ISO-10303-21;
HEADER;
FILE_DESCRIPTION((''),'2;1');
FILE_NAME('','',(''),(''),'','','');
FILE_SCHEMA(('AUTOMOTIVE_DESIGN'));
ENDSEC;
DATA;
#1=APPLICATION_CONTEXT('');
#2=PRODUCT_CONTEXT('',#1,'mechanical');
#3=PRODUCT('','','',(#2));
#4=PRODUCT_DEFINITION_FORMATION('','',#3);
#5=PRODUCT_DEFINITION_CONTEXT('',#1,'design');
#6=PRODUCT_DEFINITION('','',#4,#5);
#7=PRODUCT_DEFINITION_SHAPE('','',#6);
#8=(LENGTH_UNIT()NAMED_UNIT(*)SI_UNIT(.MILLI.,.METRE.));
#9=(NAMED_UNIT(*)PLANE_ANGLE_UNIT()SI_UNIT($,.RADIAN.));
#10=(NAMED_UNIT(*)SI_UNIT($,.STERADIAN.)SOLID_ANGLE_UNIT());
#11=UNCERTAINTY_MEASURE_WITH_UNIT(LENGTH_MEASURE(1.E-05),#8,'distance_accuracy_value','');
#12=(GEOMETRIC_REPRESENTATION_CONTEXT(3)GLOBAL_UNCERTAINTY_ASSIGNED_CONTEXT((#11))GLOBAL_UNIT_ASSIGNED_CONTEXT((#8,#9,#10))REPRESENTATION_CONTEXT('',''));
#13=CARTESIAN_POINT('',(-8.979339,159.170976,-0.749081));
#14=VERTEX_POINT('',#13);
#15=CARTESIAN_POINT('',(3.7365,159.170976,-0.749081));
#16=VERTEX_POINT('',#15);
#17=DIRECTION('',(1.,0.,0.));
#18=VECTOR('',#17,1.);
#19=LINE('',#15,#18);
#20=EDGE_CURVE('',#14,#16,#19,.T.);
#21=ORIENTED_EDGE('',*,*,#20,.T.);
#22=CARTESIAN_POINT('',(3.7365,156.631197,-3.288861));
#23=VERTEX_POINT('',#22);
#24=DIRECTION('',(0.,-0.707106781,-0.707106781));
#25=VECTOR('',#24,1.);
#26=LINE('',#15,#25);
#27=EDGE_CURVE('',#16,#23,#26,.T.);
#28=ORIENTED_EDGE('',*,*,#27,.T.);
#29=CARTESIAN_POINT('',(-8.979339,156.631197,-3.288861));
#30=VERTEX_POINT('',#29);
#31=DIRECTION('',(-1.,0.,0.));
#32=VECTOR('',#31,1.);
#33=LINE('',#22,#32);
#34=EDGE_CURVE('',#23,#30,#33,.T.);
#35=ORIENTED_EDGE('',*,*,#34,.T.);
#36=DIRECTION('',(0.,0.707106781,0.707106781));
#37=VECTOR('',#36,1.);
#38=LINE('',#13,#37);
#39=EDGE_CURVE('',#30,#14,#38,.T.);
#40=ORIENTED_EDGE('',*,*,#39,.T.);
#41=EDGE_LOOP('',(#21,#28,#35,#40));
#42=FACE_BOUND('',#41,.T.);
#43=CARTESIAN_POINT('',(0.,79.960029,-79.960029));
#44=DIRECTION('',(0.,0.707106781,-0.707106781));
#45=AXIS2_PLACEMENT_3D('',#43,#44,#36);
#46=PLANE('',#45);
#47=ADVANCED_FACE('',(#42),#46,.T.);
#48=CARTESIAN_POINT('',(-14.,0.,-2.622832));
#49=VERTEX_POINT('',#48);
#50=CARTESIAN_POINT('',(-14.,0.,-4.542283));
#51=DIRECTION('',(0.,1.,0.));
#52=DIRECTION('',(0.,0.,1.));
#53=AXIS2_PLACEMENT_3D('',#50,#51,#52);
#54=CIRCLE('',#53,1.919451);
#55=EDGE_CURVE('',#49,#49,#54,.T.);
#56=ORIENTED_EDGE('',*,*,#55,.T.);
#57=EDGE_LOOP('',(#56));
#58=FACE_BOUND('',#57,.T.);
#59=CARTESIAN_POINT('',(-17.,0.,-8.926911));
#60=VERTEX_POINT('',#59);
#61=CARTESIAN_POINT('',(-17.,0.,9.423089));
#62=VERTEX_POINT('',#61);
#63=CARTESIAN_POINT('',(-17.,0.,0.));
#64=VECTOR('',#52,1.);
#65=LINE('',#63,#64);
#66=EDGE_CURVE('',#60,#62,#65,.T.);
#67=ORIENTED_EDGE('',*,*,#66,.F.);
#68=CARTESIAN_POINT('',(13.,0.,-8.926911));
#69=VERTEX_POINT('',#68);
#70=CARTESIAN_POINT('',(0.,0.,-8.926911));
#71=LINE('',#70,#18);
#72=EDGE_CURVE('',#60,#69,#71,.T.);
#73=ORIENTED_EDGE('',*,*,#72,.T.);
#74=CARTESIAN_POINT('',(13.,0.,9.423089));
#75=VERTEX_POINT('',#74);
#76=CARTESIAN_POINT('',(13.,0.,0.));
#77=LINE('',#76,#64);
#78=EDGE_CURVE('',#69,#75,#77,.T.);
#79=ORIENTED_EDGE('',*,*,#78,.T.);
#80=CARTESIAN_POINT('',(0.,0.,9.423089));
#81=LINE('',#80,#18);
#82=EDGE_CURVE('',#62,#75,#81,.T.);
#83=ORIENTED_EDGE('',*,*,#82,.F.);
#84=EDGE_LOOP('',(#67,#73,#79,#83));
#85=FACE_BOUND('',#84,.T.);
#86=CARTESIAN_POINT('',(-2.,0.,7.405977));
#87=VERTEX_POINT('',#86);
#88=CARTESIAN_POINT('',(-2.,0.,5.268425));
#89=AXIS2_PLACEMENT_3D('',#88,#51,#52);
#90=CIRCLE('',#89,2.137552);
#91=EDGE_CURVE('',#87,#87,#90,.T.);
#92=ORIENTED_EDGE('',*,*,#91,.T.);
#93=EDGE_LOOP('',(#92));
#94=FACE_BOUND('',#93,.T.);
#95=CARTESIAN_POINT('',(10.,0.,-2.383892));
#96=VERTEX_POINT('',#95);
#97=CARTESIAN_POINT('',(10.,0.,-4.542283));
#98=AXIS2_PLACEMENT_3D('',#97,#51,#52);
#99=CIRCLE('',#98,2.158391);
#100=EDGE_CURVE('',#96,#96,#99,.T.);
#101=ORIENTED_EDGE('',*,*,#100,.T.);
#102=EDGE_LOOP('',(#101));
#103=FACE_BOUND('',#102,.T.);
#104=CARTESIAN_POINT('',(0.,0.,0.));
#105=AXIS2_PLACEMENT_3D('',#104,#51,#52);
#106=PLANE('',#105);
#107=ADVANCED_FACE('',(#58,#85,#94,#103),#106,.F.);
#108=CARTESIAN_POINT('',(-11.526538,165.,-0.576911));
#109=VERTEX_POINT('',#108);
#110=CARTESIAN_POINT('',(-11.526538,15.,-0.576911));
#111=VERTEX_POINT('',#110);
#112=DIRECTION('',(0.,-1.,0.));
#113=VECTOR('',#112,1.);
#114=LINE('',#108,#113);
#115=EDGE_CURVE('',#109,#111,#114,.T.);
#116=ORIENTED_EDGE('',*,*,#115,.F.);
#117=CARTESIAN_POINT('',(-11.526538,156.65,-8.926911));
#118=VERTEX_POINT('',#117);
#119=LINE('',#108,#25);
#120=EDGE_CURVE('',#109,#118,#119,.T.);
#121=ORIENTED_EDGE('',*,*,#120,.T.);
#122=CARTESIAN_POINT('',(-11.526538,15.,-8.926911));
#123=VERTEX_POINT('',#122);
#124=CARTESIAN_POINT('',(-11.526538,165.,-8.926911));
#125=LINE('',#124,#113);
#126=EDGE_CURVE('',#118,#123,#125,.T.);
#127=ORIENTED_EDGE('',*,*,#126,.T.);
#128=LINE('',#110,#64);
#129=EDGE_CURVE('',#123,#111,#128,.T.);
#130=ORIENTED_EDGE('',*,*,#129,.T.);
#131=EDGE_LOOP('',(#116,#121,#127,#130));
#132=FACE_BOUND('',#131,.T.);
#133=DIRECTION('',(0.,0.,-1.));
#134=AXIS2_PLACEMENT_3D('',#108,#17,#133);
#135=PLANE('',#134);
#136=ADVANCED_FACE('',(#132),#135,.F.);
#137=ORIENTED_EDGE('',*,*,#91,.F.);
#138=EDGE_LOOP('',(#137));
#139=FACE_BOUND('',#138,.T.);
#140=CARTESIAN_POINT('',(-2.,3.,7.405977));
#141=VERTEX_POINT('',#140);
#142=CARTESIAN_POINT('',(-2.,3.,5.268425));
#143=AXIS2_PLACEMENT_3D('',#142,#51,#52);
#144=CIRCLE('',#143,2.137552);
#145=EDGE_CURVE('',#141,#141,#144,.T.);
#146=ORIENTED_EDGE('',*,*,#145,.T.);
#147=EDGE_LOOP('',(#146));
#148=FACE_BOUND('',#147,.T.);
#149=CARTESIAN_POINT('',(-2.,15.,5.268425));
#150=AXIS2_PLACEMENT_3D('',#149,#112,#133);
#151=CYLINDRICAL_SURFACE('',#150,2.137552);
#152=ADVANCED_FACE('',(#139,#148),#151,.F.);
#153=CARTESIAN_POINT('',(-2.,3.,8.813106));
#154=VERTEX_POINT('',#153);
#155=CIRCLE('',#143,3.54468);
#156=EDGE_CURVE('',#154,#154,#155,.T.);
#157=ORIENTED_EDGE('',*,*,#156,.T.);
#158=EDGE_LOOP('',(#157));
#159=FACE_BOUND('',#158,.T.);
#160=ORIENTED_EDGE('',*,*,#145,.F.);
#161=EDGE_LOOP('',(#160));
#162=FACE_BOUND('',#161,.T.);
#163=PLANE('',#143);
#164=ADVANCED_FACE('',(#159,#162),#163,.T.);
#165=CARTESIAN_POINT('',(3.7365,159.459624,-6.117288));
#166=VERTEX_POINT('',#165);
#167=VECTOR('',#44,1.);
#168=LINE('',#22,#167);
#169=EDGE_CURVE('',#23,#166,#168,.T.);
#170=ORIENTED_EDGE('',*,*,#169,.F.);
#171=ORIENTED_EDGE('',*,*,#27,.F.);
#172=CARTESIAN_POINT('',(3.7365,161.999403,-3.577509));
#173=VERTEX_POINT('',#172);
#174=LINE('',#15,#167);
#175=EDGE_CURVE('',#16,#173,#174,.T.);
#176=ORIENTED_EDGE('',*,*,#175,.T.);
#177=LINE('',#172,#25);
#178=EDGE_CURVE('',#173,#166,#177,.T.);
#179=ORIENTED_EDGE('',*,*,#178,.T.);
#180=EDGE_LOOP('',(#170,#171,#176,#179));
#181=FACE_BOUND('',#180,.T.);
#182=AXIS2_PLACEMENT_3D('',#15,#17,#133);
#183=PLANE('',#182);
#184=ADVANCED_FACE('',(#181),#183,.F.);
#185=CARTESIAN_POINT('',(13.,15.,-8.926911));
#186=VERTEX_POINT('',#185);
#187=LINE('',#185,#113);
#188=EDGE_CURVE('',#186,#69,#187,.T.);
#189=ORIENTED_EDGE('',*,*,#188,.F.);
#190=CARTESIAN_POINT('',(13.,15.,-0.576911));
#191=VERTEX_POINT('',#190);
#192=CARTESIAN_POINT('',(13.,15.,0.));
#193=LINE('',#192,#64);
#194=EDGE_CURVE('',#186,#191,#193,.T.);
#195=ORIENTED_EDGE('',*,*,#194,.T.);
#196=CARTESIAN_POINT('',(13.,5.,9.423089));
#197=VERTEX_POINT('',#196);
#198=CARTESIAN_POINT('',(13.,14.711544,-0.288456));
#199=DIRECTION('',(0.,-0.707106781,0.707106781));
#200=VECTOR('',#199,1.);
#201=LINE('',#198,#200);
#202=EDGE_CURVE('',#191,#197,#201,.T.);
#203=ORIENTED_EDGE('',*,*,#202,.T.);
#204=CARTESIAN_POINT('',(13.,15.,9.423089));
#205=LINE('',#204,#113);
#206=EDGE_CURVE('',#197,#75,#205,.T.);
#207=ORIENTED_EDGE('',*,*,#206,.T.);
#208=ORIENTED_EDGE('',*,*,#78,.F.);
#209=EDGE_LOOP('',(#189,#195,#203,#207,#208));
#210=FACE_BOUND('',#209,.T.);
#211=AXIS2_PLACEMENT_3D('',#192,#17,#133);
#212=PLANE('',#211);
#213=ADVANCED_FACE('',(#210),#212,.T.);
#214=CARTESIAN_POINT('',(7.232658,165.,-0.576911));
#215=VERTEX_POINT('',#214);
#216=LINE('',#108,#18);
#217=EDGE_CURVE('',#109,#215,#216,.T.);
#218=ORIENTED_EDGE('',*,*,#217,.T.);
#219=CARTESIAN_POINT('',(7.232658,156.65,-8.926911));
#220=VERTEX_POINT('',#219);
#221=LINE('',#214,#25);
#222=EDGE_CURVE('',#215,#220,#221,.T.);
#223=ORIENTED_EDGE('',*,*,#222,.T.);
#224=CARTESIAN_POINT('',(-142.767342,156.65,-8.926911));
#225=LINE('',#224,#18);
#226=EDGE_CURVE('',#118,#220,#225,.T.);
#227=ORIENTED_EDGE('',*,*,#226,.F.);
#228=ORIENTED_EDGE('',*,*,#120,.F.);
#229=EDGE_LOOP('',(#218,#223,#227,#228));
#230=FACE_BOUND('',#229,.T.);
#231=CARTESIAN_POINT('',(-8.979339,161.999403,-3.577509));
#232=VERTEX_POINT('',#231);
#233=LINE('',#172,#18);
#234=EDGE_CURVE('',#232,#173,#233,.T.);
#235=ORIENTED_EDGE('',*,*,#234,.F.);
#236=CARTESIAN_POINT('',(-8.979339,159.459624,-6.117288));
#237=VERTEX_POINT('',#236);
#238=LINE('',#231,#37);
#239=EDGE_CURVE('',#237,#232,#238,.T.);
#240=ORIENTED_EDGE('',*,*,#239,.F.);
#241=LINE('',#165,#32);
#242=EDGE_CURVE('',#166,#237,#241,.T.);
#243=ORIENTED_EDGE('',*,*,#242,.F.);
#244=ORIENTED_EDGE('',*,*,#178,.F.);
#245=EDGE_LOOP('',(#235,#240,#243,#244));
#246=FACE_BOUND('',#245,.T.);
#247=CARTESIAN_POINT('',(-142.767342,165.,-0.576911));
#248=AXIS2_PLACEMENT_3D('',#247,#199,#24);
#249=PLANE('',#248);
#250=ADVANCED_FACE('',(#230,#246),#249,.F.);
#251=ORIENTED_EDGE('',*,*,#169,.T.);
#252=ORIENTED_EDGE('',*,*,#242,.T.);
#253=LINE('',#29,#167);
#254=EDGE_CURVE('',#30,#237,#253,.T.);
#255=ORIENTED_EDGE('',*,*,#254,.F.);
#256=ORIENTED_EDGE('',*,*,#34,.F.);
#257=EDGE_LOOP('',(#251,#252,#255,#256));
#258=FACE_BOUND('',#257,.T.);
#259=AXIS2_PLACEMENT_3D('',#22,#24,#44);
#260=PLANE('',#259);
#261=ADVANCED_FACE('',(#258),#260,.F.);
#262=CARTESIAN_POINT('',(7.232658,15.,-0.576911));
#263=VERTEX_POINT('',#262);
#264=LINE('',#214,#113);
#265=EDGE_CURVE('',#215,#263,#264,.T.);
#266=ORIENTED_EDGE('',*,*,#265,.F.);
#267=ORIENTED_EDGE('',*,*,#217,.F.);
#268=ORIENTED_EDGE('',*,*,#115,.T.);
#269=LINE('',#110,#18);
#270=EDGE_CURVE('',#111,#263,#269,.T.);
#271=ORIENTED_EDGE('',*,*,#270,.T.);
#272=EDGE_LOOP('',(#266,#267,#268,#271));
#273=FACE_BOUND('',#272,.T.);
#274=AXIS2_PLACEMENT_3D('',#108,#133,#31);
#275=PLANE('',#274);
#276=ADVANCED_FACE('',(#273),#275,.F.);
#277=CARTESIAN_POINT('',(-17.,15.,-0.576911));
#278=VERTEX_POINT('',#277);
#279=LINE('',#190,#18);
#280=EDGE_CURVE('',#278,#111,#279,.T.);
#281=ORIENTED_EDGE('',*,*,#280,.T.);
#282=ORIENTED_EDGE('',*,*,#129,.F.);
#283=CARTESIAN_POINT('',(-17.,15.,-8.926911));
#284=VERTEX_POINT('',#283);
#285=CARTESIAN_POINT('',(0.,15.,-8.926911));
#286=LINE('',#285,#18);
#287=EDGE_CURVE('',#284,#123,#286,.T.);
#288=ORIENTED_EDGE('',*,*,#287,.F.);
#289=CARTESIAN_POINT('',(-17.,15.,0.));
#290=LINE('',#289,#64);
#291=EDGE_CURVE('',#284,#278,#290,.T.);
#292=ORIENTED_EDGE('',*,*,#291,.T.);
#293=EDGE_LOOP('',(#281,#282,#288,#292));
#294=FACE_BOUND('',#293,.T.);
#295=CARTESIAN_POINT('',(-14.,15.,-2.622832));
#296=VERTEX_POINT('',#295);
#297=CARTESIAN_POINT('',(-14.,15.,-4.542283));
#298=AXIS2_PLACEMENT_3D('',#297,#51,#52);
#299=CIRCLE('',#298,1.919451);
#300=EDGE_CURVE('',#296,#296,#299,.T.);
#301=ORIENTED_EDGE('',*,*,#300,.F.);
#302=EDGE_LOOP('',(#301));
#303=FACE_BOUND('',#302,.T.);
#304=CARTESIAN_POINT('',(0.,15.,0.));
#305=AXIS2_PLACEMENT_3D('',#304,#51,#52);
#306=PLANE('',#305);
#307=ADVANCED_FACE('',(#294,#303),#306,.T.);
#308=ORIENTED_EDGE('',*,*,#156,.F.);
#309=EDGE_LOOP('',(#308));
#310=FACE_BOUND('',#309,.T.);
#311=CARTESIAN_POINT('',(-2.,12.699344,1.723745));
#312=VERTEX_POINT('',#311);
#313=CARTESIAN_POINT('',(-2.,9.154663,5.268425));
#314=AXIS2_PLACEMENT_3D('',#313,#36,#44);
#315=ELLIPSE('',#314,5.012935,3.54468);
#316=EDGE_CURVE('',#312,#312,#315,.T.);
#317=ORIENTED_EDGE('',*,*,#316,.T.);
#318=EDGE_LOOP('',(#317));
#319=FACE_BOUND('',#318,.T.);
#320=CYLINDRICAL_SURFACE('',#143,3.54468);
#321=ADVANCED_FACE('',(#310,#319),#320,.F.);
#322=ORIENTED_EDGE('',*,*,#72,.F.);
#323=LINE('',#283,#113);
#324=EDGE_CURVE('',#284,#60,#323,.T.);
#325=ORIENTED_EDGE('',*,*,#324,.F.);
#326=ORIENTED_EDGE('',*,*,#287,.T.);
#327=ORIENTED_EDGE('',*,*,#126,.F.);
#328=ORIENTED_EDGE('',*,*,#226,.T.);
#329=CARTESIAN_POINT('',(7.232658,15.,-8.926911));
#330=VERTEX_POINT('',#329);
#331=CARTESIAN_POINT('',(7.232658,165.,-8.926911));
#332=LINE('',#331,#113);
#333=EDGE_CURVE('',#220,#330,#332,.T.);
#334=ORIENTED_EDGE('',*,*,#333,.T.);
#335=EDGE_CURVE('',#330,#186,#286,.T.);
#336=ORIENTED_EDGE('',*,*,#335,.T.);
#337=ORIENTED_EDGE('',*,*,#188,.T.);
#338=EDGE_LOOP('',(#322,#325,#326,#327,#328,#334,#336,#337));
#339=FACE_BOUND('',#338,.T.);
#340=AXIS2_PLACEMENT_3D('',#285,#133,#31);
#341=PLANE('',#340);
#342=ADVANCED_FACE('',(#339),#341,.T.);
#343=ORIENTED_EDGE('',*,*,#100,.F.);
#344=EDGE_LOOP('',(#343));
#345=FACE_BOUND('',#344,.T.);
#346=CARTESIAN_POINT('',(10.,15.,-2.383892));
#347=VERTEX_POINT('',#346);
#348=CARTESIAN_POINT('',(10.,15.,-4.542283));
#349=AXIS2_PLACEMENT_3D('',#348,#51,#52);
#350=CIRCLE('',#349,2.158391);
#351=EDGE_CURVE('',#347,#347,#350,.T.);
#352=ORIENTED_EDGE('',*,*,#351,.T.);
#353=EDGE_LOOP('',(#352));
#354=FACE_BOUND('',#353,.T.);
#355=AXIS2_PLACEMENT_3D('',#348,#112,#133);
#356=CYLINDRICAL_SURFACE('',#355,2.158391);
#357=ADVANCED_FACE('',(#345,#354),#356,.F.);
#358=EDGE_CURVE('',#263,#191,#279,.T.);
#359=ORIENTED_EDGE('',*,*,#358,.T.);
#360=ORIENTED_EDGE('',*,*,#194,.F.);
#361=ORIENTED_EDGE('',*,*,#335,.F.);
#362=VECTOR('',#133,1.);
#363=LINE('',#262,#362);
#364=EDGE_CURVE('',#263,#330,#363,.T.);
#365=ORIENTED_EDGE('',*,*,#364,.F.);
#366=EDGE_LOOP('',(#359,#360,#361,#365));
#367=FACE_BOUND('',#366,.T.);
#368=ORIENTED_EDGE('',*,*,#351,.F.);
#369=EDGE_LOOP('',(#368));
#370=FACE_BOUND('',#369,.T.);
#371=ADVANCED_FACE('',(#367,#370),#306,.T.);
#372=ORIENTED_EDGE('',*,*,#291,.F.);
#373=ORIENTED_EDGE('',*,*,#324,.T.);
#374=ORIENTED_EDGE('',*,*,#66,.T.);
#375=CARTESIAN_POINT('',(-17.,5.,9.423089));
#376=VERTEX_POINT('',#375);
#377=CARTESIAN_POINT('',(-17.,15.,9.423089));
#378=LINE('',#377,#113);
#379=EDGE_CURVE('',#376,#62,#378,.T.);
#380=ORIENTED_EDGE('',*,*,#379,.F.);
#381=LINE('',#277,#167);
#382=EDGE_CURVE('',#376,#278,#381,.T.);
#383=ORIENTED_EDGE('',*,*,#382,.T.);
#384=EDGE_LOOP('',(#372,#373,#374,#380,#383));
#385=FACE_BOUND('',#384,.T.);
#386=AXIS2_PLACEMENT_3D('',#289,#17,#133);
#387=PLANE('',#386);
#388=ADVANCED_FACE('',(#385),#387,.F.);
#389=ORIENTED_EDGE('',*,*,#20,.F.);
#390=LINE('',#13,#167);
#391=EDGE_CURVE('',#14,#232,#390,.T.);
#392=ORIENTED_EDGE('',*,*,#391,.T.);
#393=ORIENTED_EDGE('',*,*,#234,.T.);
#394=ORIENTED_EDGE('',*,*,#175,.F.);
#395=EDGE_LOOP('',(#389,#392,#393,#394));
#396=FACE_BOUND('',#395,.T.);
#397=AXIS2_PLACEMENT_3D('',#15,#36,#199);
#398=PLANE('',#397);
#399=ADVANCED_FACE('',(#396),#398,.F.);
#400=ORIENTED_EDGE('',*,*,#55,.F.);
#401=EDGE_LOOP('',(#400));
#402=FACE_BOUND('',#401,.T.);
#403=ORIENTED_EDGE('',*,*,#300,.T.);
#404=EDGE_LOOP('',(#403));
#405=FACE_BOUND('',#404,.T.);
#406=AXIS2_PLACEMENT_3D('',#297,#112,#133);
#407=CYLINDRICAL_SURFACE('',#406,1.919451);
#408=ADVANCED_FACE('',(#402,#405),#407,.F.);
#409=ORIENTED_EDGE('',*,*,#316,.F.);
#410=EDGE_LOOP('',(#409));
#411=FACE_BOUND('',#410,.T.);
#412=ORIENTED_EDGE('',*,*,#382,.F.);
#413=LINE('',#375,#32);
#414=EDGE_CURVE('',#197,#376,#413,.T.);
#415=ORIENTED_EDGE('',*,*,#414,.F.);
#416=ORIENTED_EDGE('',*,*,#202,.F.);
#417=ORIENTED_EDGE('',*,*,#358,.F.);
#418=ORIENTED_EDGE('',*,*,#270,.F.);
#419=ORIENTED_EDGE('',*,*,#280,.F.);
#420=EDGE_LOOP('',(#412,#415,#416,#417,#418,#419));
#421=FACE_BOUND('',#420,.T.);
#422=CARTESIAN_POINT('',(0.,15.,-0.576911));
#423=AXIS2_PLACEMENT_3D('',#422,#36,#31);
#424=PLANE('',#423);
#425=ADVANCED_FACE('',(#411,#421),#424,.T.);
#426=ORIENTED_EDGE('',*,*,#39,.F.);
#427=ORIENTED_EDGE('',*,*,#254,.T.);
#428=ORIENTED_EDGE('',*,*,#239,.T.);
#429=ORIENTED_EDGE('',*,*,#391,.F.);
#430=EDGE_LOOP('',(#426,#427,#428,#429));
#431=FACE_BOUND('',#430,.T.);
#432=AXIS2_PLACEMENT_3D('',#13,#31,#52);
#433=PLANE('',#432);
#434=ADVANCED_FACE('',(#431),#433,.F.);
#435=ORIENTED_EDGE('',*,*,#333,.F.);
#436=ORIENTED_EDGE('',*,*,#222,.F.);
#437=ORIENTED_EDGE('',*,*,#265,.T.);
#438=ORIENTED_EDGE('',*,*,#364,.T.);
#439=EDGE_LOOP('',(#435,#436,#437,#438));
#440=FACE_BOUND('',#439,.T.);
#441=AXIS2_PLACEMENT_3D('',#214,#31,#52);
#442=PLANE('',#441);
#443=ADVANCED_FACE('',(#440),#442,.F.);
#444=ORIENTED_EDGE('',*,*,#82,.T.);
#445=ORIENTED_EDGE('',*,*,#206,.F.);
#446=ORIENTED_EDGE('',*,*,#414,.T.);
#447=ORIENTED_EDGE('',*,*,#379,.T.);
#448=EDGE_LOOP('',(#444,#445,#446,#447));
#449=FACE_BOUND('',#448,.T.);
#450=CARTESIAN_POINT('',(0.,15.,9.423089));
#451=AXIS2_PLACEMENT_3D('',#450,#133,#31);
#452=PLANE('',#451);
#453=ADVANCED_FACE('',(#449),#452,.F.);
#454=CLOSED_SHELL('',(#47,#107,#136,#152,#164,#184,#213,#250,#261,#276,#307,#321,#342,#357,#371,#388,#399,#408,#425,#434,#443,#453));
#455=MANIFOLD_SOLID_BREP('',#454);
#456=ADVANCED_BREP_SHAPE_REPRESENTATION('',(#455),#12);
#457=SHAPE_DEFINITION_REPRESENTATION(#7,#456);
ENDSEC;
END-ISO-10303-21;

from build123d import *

# Parameters (mm, degrees)
BOSS_EXTRUDE1_DEPTH = 15
CHAMFER1_SIZE       = 10
SKETCH2_R           = 3.544680495
CUT_EXTRUDE1_DEPTH  = 12
SKETCH3_W           = 18.759195859
SKETCH3_H           = 8.35
BOSS_EXTRUDE2_DEPTH = 150
CUT_EXTRUDE2_DEPTH  = 150
SKETCH5_W           = 12.715839202
SKETCH5_H           = 3.591790086
CUT_EXTRUDE3_DEPTH  = 4


with BuildPart() as part:
    # Sketch1 → Boss-Extrude1 (new body)
    with BuildSketch(Plane(origin=(0, 0, 0), x_dir=(1, 0, 0), z_dir=(0, 1, 0))):
        with BuildLine():
            Line((13, 8.926911476), (-2, 8.926911476))
            Line((-2, 8.926911476), (-2, 4.542283032))
            Line((-2, 4.542283032), (7.841609066, 4.542283032))
            ThreePointArc((7.841609066, 4.542283032), (10, 6.700673966), (12.158390934, 4.542283032))
            Line((12.158390934, 4.542283032), (13, 4.542283032))
            Line((13, 4.542283032), (13, 8.926911476))
        make_face()
        with BuildLine():
            Line((-2, 4.542283032), (-2, 8.926911476))
            Line((-2, 8.926911476), (-17, 8.926911476))
            Line((-17, 8.926911476), (-17, 4.542283032))
            Line((-17, 4.542283032), (-15.919451213, 4.542283032))
            ThreePointArc((-15.919451213, 4.542283032), (-14, 6.461734245), (-12.080548787, 4.542283032))
            Line((-12.080548787, 4.542283032), (-2, 4.542283032))
        make_face()
        with BuildLine():
            Line((-2, -3.130873366), (-2, 4.542283032))
            Line((-2, 4.542283032), (-12.080548787, 4.542283032))
            ThreePointArc((-12.080548787, 4.542283032), (-14, 2.622831819), (-15.919451213, 4.542283032))
            Line((-15.919451213, 4.542283032), (-17, 4.542283032))
            Line((-17, 4.542283032), (-17, -9.423088524))
            Line((-17, -9.423088524), (-2, -9.423088524))
            Line((-2, -9.423088524), (-2, -7.40597744))
            ThreePointArc((-2, -7.40597744), (-4.137552037, -5.268425403), (-2, -3.130873366))
        make_face()
        with BuildLine():
            Line((7.841609066, 4.542283032), (-2, 4.542283032))
            Line((-2, 4.542283032), (-2, -3.130873366))
            ThreePointArc((-2, -3.130873366), (-0.488522459, -3.756947863), (0.137552037, -5.268425403))
            ThreePointArc((0.137552037, -5.268425403), (-0.488522459, -6.779902944), (-2, -7.40597744))
            Line((-2, -7.40597744), (-2, -9.423088524))
            Line((-2, -9.423088524), (13, -9.423088524))
            Line((13, -9.423088524), (13, 4.542283032))
            Line((13, 4.542283032), (12.158390934, 4.542283032))
            ThreePointArc((12.158390934, 4.542283032), (10, 2.383892098), (7.841609066, 4.542283032))
        make_face()
    extrude(amount=BOSS_EXTRUDE1_DEPTH)

    # Chamfer1
    # the kernel refuses this chamfer: 10 mm, written as the material it takes off along each edge
    with BuildSketch(Plane(origin=(-42.71682988, 15, 9.423088524), x_dir=(0, -0.9996219169112968, 0.027495876610586317), z_dir=(1, 0, 0))) as chamfer1_piece_1:
        Polygon((CHAMFER1_SIZE * 0.999621916911, CHAMFER1_SIZE * 0.0274958766106), (-CHAMFER1_SIZE * 0.0274958766106, CHAMFER1_SIZE * 0.999621916911), (0, 0), align=None)
    extrude(amount=81.433659759, mode=Mode.SUBTRACT)

    # Sketch2 → Cut-Extrude1 (cut)
    with BuildSketch(Plane(origin=(0, 15, 0), x_dir=(1, 0, 0), z_dir=(0, 1, 0))):
        with Locations(Location((-2, -5.268425403, 0), (0, 0, 270))):
            Circle(SKETCH2_R)
    extrude(amount=-CUT_EXTRUDE1_DEPTH, mode=Mode.SUBTRACT)

    # Sketch3 → Boss-Extrude2 (add)
    with BuildSketch(Plane(origin=(0, 15, 0), x_dir=(1, 0, 0), z_dir=(0, 1, 0))):
        with Locations((-2.146940407, 4.751911476)):
            Rectangle(SKETCH3_W, SKETCH3_H)
    extrude(amount=BOSS_EXTRUDE2_DEPTH)

    # Sketch4 → Cut-Extrude2 (cut)
    with BuildSketch(Plane(origin=(7.232657523, 0, 0), x_dir=(0, 0, -1), z_dir=(1, 0, 0))):
        Polygon((0.576911476, 165), (8.926911476, 156.65), (8.926911476, 165), align=None)
    extrude(amount=-CUT_EXTRUDE2_DEPTH, mode=Mode.SUBTRACT)

    # Sketch5 → Cut-Extrude3 (cut)
    with BuildSketch(Plane(origin=(0, 82.788455738, -82.788455738), x_dir=(1, 0, 0), z_dir=(0, 0.707106781186556, -0.707106781186539))):
        with Locations((-2.621419411, -110.225300743)):
            Rectangle(SKETCH5_W, SKETCH5_H)
    extrude(amount=-CUT_EXTRUDE3_DEPTH, mode=Mode.SUBTRACT)


solid = part.part
